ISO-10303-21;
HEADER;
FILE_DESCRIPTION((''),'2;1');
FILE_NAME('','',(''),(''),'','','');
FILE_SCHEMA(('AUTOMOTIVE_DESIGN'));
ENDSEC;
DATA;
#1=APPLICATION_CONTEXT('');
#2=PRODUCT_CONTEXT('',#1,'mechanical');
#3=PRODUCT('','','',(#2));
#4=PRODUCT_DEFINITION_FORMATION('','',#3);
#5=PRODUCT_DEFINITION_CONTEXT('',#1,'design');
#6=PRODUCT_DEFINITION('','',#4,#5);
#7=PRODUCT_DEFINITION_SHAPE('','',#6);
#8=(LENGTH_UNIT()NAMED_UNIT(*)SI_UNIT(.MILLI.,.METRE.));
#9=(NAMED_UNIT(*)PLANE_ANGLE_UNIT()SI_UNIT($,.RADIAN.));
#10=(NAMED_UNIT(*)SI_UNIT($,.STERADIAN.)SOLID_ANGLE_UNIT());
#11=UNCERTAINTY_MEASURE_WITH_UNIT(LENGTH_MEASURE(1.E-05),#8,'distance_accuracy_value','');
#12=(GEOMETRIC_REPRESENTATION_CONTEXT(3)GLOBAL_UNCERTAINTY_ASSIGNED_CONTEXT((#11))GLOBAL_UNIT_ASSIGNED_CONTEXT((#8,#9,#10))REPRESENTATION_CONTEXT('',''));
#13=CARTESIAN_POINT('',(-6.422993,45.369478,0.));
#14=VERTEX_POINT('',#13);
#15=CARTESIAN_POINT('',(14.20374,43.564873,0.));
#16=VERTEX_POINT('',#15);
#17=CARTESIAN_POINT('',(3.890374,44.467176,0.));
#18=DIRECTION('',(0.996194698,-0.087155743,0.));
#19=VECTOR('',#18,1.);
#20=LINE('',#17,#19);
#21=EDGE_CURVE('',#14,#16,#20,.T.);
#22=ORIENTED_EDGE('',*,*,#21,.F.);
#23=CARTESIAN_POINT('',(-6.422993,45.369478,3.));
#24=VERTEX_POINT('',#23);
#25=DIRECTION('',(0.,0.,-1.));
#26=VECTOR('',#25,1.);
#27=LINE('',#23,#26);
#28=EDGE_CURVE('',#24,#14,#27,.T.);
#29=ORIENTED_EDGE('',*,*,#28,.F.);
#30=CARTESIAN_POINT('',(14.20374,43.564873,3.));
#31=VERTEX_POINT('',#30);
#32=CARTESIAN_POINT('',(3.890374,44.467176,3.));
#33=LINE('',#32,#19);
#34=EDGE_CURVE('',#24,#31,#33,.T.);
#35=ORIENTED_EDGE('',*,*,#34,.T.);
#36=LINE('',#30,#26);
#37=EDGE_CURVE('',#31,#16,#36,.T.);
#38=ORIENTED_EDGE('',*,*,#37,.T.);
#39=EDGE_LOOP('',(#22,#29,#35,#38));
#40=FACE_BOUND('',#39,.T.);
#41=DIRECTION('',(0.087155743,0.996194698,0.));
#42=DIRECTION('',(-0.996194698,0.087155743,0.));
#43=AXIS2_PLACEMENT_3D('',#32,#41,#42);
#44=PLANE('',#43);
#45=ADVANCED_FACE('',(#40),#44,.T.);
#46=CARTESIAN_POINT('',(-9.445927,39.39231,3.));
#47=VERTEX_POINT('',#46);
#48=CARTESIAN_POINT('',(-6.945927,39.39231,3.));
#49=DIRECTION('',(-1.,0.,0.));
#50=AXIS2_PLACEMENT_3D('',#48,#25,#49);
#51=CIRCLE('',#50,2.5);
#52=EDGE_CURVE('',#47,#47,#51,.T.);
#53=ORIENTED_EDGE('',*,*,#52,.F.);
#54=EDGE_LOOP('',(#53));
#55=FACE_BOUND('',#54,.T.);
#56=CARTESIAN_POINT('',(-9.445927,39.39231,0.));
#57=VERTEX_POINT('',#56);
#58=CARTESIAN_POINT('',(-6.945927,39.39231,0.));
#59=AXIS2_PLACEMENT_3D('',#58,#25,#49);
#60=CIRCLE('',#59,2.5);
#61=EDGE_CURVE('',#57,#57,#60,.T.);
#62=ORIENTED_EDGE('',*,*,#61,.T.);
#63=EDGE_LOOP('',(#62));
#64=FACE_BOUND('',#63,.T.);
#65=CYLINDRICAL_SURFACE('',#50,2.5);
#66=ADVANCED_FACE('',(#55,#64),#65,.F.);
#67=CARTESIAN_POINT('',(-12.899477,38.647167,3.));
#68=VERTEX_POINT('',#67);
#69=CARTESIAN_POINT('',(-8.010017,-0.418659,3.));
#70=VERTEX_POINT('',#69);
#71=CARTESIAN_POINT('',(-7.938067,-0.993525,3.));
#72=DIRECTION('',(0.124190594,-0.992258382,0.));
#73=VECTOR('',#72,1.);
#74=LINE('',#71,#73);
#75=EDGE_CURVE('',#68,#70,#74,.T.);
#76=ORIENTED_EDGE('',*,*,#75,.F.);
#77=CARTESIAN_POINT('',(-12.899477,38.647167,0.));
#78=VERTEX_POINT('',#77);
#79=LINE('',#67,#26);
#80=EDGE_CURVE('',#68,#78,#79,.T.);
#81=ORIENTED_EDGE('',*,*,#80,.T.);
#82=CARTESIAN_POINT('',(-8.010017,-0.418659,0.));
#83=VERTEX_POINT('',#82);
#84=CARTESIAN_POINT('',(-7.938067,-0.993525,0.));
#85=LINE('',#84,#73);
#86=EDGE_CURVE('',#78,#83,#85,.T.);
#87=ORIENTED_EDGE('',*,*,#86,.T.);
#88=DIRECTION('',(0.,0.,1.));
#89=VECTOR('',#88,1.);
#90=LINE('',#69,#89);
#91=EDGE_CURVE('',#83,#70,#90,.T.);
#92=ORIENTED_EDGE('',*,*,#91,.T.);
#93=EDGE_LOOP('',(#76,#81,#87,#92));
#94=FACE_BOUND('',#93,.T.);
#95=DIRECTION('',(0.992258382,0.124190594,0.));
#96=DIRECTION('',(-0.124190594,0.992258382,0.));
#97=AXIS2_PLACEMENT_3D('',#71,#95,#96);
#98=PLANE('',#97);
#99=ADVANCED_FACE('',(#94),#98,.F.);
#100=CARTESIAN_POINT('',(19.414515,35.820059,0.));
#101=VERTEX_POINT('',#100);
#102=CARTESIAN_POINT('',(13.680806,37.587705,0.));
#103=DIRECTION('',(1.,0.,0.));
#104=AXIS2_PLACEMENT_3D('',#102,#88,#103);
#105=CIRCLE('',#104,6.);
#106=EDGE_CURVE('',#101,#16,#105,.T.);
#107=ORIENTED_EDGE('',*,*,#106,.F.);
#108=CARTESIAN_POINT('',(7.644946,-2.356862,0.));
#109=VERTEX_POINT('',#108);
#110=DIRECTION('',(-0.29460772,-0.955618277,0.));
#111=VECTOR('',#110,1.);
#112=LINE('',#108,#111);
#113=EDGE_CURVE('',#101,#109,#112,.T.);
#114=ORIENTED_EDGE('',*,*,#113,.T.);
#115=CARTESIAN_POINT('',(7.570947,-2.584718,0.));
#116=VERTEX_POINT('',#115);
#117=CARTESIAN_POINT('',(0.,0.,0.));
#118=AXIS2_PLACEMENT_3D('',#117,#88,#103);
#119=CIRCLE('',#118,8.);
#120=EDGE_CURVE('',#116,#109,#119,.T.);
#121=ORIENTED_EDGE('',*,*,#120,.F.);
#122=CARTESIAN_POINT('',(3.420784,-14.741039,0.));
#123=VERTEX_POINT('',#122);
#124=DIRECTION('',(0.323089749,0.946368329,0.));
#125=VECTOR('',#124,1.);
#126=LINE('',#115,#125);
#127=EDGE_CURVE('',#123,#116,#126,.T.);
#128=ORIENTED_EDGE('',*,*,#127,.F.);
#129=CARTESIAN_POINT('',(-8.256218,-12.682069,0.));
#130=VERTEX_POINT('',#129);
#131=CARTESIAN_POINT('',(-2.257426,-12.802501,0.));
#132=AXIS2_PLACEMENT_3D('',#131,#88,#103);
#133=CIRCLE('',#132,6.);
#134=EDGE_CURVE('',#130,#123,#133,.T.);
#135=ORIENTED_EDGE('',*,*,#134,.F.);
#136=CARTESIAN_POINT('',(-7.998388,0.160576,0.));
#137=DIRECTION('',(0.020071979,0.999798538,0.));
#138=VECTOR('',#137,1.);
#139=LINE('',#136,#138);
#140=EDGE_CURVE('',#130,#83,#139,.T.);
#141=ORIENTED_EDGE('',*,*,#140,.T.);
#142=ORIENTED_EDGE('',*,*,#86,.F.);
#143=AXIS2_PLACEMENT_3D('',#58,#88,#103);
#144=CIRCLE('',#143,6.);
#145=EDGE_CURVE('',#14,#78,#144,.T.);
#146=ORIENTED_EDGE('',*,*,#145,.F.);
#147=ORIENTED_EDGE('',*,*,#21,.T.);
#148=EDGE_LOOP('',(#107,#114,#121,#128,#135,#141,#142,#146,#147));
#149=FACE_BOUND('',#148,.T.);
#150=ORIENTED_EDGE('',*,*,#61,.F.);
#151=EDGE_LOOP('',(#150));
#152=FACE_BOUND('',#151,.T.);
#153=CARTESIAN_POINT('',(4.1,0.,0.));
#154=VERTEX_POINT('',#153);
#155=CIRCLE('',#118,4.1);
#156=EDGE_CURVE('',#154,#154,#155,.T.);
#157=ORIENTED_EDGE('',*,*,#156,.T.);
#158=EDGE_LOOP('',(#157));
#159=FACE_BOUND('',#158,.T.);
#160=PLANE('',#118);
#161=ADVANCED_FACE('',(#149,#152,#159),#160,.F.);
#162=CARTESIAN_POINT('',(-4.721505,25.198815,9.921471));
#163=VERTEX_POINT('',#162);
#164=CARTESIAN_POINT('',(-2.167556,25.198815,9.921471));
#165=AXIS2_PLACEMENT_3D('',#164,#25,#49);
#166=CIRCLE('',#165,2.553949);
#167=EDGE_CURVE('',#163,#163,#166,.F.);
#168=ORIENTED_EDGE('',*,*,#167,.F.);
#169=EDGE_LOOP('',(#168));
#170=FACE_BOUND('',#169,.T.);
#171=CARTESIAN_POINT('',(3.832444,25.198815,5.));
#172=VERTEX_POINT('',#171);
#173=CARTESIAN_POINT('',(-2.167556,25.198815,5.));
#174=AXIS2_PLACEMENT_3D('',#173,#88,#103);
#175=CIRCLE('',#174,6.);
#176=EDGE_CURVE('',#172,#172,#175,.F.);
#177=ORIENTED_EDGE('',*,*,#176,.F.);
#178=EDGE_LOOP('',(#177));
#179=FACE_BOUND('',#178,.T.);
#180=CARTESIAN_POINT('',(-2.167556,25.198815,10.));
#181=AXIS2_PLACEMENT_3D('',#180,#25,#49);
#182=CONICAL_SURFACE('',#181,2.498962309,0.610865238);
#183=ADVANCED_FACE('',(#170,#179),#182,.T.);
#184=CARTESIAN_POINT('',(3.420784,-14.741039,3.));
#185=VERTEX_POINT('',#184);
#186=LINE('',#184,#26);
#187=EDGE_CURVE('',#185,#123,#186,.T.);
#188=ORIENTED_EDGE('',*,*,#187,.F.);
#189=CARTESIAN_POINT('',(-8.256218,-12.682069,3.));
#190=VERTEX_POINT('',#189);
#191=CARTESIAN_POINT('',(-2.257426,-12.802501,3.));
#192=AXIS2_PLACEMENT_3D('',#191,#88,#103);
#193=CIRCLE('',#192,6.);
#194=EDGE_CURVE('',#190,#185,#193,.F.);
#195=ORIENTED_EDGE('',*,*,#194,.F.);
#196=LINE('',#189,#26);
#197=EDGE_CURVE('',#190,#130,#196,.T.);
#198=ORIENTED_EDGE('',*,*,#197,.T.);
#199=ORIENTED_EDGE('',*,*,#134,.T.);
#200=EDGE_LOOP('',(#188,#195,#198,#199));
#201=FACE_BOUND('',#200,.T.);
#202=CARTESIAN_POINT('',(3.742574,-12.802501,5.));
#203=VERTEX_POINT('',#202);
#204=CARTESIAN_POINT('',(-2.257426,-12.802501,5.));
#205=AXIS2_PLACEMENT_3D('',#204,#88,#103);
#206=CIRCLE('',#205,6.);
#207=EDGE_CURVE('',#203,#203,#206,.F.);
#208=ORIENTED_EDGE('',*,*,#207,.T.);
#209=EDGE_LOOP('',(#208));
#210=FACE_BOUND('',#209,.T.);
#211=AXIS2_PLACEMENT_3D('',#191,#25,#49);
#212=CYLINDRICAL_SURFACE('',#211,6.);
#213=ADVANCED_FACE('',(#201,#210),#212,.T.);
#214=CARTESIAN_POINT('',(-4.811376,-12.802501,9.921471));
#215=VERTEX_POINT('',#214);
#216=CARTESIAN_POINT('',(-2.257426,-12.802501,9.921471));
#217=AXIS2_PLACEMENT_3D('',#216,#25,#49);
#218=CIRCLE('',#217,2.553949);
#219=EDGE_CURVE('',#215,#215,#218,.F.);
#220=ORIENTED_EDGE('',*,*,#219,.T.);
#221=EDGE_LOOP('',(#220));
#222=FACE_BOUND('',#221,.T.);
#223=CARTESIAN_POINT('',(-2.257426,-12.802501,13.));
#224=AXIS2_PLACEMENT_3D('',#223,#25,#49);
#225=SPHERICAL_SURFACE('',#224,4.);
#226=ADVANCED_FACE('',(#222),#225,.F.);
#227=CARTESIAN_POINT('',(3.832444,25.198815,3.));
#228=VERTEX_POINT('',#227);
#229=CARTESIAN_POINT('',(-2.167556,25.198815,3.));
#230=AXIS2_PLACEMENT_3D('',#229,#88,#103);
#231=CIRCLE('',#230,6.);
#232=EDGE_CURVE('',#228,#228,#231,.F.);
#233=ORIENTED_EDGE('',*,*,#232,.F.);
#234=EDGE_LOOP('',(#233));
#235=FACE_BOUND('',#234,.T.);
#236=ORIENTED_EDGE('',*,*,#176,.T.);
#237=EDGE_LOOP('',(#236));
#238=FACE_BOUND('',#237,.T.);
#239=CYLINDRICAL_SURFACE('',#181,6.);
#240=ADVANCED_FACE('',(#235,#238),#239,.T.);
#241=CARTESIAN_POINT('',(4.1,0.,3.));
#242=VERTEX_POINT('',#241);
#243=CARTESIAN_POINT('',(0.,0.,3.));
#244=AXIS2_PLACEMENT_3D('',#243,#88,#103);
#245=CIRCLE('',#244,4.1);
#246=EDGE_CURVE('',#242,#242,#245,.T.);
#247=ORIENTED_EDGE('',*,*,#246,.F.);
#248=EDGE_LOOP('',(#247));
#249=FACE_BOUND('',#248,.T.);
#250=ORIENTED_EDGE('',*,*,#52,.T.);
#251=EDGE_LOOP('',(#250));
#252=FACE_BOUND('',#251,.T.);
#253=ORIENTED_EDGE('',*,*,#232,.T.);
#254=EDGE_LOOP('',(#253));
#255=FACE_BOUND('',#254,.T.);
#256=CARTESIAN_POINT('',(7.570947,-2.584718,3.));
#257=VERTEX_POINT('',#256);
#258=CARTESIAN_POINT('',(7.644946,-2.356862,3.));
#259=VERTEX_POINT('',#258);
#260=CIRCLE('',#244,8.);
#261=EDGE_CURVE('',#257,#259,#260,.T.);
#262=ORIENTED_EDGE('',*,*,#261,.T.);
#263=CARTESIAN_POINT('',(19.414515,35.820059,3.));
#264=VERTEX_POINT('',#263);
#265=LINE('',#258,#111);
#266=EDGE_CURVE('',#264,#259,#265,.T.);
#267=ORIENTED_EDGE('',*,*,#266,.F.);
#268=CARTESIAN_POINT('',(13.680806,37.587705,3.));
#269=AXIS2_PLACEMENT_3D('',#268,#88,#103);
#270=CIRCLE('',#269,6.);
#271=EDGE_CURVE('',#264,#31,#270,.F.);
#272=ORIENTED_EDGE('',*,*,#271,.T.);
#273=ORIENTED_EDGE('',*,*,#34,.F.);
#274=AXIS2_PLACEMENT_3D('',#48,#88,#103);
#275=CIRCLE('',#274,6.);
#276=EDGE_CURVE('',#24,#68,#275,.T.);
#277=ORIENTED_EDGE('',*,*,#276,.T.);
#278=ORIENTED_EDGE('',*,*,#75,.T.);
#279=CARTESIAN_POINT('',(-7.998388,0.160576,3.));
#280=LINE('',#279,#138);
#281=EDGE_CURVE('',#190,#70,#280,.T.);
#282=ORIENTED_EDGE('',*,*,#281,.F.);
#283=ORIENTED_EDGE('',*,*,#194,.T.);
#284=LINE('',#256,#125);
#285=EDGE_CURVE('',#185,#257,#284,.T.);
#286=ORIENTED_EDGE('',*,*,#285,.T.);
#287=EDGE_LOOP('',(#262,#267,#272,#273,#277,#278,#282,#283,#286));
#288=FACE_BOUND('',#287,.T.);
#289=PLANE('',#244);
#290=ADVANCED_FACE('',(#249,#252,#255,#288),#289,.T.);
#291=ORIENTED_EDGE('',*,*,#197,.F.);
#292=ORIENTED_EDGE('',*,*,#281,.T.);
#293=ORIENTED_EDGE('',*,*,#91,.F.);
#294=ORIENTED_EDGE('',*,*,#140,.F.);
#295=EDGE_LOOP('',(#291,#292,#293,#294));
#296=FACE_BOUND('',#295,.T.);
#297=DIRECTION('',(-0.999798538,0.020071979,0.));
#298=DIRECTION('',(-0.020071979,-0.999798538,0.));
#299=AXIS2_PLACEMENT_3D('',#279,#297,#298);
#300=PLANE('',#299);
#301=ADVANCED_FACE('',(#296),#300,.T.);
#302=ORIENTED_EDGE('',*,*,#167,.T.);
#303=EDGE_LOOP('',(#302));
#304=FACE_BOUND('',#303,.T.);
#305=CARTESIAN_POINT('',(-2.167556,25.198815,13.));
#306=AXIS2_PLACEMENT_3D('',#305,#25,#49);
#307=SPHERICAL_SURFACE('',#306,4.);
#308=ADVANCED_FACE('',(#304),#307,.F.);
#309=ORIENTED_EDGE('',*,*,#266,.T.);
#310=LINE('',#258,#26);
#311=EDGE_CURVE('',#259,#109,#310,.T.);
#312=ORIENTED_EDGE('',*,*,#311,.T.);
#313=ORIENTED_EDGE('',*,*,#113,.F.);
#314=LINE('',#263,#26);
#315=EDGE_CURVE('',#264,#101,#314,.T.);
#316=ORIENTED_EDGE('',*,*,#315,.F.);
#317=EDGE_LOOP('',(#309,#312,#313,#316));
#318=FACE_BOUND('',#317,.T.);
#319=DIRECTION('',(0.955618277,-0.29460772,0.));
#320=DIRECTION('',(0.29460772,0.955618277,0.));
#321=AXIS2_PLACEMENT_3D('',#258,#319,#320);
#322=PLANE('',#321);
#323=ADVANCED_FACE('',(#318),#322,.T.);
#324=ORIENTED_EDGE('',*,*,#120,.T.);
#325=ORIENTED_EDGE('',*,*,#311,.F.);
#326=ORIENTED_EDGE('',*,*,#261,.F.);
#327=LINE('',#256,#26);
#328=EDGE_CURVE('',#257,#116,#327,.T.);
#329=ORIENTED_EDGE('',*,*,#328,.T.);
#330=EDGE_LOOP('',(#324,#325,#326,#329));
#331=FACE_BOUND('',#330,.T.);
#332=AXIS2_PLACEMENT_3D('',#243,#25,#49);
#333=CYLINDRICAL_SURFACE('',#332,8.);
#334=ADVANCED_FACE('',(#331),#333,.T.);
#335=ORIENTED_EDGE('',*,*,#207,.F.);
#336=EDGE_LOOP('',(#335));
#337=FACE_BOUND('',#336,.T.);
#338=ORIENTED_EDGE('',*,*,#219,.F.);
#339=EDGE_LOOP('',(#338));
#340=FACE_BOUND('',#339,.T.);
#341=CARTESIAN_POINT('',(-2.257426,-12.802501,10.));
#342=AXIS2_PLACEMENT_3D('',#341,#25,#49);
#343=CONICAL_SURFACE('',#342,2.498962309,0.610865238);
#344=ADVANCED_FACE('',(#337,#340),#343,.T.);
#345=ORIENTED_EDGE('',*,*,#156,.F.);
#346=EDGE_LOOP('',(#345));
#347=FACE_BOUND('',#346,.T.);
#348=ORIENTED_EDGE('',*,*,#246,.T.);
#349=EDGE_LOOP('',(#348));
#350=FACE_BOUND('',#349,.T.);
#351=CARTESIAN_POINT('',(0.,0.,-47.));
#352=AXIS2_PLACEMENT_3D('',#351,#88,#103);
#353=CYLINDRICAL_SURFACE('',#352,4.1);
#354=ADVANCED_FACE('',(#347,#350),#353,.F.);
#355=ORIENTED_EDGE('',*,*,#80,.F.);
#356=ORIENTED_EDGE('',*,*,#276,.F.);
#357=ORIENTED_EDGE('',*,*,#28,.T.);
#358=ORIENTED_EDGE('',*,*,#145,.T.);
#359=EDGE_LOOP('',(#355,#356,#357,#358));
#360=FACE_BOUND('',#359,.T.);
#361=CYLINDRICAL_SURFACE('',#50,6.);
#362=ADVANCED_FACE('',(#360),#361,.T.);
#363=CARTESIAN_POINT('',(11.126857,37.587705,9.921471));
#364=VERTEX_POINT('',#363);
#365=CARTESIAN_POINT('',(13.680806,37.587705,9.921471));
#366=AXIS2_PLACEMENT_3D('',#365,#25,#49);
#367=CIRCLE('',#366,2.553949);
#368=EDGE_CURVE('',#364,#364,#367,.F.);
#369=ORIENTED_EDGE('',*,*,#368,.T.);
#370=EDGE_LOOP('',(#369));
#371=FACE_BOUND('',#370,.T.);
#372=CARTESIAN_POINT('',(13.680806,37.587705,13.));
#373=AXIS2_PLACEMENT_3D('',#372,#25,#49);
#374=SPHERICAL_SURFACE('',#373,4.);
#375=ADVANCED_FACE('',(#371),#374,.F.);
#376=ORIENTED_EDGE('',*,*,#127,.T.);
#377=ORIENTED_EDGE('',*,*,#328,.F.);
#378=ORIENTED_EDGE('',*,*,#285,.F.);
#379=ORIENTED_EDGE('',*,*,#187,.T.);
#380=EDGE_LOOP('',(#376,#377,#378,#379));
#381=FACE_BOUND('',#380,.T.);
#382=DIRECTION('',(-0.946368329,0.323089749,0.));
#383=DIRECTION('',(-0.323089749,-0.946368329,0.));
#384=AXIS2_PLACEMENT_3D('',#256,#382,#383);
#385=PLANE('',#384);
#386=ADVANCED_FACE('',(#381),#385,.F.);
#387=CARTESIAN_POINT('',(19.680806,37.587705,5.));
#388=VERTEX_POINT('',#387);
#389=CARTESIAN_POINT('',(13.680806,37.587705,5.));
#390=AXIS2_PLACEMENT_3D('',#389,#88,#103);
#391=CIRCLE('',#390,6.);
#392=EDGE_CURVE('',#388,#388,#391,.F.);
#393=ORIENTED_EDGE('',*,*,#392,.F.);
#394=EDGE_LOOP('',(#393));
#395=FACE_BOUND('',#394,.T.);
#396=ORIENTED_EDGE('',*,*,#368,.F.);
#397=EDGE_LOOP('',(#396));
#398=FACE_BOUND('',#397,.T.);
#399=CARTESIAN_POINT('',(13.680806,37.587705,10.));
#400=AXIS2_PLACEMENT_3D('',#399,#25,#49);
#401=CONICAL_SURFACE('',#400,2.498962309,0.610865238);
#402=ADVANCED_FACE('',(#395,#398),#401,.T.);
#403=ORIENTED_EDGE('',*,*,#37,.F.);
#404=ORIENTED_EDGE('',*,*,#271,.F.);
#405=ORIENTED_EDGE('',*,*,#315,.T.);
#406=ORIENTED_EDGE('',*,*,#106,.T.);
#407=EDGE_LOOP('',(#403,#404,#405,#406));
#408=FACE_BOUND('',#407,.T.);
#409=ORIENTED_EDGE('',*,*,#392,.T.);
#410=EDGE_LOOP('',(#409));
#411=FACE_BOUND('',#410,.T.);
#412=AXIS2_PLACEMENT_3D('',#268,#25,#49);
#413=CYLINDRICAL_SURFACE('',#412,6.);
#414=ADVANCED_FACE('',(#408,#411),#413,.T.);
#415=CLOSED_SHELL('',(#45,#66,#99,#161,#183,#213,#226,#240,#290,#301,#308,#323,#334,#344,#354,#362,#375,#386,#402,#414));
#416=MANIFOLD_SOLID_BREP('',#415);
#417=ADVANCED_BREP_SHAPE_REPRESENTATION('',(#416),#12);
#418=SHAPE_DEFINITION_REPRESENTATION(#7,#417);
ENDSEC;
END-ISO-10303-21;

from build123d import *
from build123d.topology import SkipClean

# Parameters (mm, degrees)
BOSS_EXTRUDE1_DEPTH = 3
BOSS_EXTRUDE5_DEPTH = 3
BOSS_EXTRUDE2_DEPTH = 3
SKETCH3_R           = 4.1
CUT_EXTRUDE1_DEPTH  = 50
SKETCH1_4_R         = 6
BOSS_EXTRUDE3_DEPTH = 10
SKETCH2_4_R         = 6
BOSS_EXTRUDE4_DEPTH = 10
CHAMFER1_SIZE       = 5
CHAMFER1_SIZE_2     = 3.501037691
SKETCH9_R           = 2.5
CUT_EXTRUDE2_DEPTH  = 3


with BuildPart() as part:
    # Sketch1 → Boss-Extrude1 (new body)
    with BuildSketch(Plane.XY):
        with BuildLine():
            ThreePointArc((-7.862783113, 28.36246747), (-9.674812704, 26.016588816), (-10.142674299, 23.089524856))
            Line((-10.142674299, 23.089524856), (-7.966824047, -0.727814955))
            ThreePointArc((-7.966824047, -0.727814955), (-0.830270862, -7.956798998), (7.644946217, -2.356861757))
            Line((7.644946217, -2.356861757), (19.414515396, 35.820058514))
            ThreePointArc((19.414515396, 35.820058514), (17.084366379, 42.528936958), (9.985578884, 42.314786229))
            Line((9.985578884, 42.314786229), (-7.862783113, 28.36246747))
        make_face()
    extrude(amount=BOSS_EXTRUDE1_DEPTH)

    # Sketch8 → Boss-Extrude5 (add)
    with BuildSketch(Plane.XY):
        with BuildLine():
            Line((14.20374019, 43.56487302), (-6.42299265, 45.369478309))
            ThreePointArc((-6.42299265, 45.369478309), (-11.266837417, 43.555209842), (-12.899477398, 38.647166557))
            Line((-12.899477398, 38.647166557), (-7.938067055, -0.993524752))
            ThreePointArc((-7.938067055, -0.993524752), (-7.953555222, -0.86078995), (-7.966824047, -0.727814955))
            Line((-7.966824047, -0.727814955), (-10.142674299, 23.089524856))
            ThreePointArc((-10.142674299, 23.089524856), (-9.674812704, 26.016588816), (-7.862783113, 28.36246747))
            Line((-7.862783113, 28.36246747), (9.985578884, 42.314786229))
            ThreePointArc((9.985578884, 42.314786229), (11.97594826, 43.340396462), (14.20374019, 43.56487302))
        make_face()
    extrude(amount=BOSS_EXTRUDE5_DEPTH)

    # Sketch2 → Boss-Extrude2 (add)
    with BuildSketch(Plane.XY):
        with BuildLine():
            Line((-7.9983883, 0.16057583), (-8.256217535, -12.682068917))
            ThreePointArc((-8.256217535, -12.682068917), (-3.299315376, -18.711347307), (3.420783665, -14.741039282))
            Line((3.420783665, -14.741039282), (7.570946632, -2.584717991))
            ThreePointArc((7.570946632, -2.584717991), (-1.389185421, -7.878462024), (-7.9983883, 0.16057583))
        make_face()
    extrude(amount=BOSS_EXTRUDE2_DEPTH)

    # Sketch3 → Cut-Extrude1 (cut)
    with BuildSketch(Plane.XY.offset(3)):
        Circle(SKETCH3_R)
    extrude(amount=-CUT_EXTRUDE1_DEPTH, mode=Mode.SUBTRACT)

    # Sketch1<4> → Boss-Extrude3 (add)
    with BuildSketch(Plane.XY):
        with Locations(Location((13.680805733, 37.587704831, 0), (0, 0, 85))):
            Circle(SKETCH1_4_R)
        with Locations((-2.167556264, 25.198814555)):
            Circle(SKETCH1_4_R)
    extrude(amount=BOSS_EXTRUDE3_DEPTH)

    # Sketch2<4> → Boss-Extrude4 (add)
    with BuildSketch(Plane.XY):
        with Locations(Location((-2.25742631, -12.802500789, 0), (0, 0, 178.849883098))):
            Circle(SKETCH2_4_R)
    extrude(amount=BOSS_EXTRUDE4_DEPTH)

    # Sketch5 one side → Cut-Revolve1 (revolve, cut)
    with SkipClean():  # the faces are left unmerged after this step: merging them gives an invalid solid
        with BuildSketch(Plane(origin=(13.680805733, 0, 0), x_dir=(0, 0, -1), z_dir=(1, 0, 0))):
            with BuildLine():
                ThreePointArc((-13, 33.587704831), (-10.171572875, 34.759277707), (-9, 37.587704831))
                ThreePointArc((-9, 37.587704831), (-10.171572875, 40.416131956), (-13, 41.587704831))
                Line((-13, 41.587704831), (-13, 33.587704831))
            make_face()
        revolve(axis=Axis((13.680805733, 41.587704831, 13), (0, -1, 0)), mode=Mode.SUBTRACT)

    # Sketch6 → Cut-Revolve2 (revolve, cut)
    with SkipClean():  # the faces are left unmerged after this step: merging them gives an invalid solid
        with BuildSketch(Plane(origin=(-2.167556264, 0, 0), x_dir=(0, 0, -1), z_dir=(1, 0, 0))):
            with BuildLine():
                ThreePointArc((-9, 25.198814555), (-10.171572875, 28.02724168), (-13, 29.198814555))
                Line((-13, 29.198814555), (-13, 21.198814555))
                ThreePointArc((-13, 21.198814555), (-10.171572875, 22.37038743), (-9, 25.198814555))
            make_face()
            with BuildLine():
                Line((-13, 21.198814555), (-13, 29.198814555))
                ThreePointArc((-13, 29.198814555), (-17, 25.198814555), (-13, 21.198814555))
            make_face()
        revolve(axis=Axis((-2.167556264, 29.198814555, 13), (0, -1, 0)), mode=Mode.SUBTRACT)

    # Sketch7 → Cut-Revolve3 (revolve, cut)
    with SkipClean():  # the faces are left unmerged after this step: merging them gives an invalid solid
        with BuildSketch(Plane(origin=(-2.25742631, 0, 0), x_dir=(0, 0, -1), z_dir=(1, 0, 0))):
            with BuildLine():
                ThreePointArc((-9, -12.802500789), (-10.171572875, -9.974073664), (-13, -8.802500789))
                Line((-13, -8.802500789), (-13, -16.802500789))
                ThreePointArc((-13, -16.802500789), (-10.171572875, -15.630927914), (-9, -12.802500789))
            make_face()
            with BuildLine():
                Line((-13, -16.802500789), (-13, -8.802500789))
                ThreePointArc((-13, -8.802500789), (-17, -12.802500789), (-13, -16.802500789))
            make_face()
        revolve(axis=Axis((-2.25742631, -8.802500789, 13), (0, -1, 0)), mode=Mode.SUBTRACT)

    # Chamfer1
    # the kernel refuses this chamfer: 5, 3.501037691 mm, written as the material it takes off along each edge
    with BuildSketch(Plane(origin=(-2.25742631, -12.802500789, 10), x_dir=(-0.9997985375420249, 0.020071978697384193, 0), z_dir=(0.020071978697384193, 0.9997985375420249, 0))) as chamfer1_piece_1:
        Polygon((6, -CHAMFER1_SIZE), (6 - CHAMFER1_SIZE_2, 0), (6, 0), align=None)
    revolve(axis=Axis((-2.25742631, -12.802500789, 10), (0, 0, 1)), mode=Mode.SUBTRACT)
    with BuildSketch(Plane(origin=(13.680805733, 37.587704831, 10), x_dir=(0.08715574274765815, 0.9961946980917454, 0), z_dir=(0.9961946980917454, -0.08715574274765815, 0))) as chamfer1_piece_2:
        Polygon((6, -CHAMFER1_SIZE), (6 - CHAMFER1_SIZE_2, 0), (6, 0), align=None)
    revolve(axis=Axis((13.680805733, 37.587704831, 10), (0, 0, 1)), mode=Mode.SUBTRACT)
    with BuildSketch(Plane(origin=(-2.167556264, 25.198814555, 10), x_dir=(1, 0, 0), z_dir=(0, -1, 0))) as chamfer1_piece_3:
        Polygon((6, -CHAMFER1_SIZE), (6 - CHAMFER1_SIZE_2, 0), (6, 0), align=None)
    revolve(axis=Axis((-2.167556264, 25.198814555, 10), (0, 0, 1)), mode=Mode.SUBTRACT)

    # Sketch9 → Cut-Extrude2 (cut)
    with BuildSketch(Plane(origin=(0, 0, 0), x_dir=(-1, 0, 0), z_dir=(0, 0, -1))):
        with Locations((6.945927107, 39.39231012)):
            Circle(SKETCH9_R)
    extrude(amount=-CUT_EXTRUDE2_DEPTH, mode=Mode.SUBTRACT)


solid = part.part
